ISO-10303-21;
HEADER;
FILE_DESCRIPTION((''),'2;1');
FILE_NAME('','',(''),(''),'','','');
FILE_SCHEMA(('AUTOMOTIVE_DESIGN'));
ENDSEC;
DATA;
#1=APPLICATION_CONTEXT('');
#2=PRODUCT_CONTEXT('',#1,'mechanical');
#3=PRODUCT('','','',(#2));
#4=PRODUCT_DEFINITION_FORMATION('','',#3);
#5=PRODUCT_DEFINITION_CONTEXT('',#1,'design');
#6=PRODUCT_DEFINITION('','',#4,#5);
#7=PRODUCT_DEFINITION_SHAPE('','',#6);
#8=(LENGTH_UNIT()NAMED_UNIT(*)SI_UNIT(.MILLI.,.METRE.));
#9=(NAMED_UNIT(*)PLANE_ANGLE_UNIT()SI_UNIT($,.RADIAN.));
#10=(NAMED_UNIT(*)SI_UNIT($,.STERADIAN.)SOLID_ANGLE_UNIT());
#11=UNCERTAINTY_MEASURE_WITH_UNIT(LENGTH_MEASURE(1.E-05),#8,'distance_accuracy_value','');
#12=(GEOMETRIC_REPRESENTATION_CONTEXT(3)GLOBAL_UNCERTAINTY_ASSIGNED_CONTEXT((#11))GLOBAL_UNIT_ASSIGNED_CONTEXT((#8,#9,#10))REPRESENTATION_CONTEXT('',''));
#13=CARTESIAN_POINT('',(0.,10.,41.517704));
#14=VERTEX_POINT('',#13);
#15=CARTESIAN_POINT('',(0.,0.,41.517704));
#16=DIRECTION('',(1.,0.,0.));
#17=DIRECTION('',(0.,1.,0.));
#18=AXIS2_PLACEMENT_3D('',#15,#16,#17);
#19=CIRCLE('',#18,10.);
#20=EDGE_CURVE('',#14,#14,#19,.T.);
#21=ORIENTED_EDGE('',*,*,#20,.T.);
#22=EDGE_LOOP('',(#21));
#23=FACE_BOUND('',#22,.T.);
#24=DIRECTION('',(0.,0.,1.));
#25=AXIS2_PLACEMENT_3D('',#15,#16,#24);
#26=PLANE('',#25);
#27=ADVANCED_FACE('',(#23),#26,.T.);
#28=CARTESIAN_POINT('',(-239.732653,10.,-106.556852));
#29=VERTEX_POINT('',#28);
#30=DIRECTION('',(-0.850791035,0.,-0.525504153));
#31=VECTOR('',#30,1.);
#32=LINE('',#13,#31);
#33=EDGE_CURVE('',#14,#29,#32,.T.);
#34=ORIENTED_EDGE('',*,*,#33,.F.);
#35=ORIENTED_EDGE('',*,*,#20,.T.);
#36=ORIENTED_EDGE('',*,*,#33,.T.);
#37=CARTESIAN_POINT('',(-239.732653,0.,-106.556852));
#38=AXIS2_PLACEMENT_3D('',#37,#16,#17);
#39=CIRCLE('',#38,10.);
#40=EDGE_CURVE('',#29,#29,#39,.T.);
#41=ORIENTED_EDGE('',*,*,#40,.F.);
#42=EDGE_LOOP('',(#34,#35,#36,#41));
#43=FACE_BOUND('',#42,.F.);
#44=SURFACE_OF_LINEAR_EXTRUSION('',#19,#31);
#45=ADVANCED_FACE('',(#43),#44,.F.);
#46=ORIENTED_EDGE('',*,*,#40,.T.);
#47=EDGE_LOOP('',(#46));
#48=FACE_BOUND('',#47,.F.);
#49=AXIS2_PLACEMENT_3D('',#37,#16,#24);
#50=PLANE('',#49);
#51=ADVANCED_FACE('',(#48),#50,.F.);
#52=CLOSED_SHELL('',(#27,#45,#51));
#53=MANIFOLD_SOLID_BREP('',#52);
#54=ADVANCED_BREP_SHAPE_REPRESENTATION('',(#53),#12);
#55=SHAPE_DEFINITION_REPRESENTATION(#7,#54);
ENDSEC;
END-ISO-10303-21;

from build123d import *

# Parameters (mm, degrees)
F0_R = 10


# Not quite as in the source:
# - the program builds the solid bodies; features that only make, move or delete a surface that nothing else refers to are left out


with BuildPart() as f2:
    # F2: sweep along a path in F1
    with BuildLine(Plane.XZ) as f2_path:
        Line((0, 41.6222922504), (-239.7326529026, -106.4522638917))
    # F0 (on Right) → F2 (sweep)
    with BuildSketch(Plane.YZ):
        with Locations((0, 41.5177041402)):
            Circle(F0_R)
    sweep(path=f2_path.line)


solid = f2.part
